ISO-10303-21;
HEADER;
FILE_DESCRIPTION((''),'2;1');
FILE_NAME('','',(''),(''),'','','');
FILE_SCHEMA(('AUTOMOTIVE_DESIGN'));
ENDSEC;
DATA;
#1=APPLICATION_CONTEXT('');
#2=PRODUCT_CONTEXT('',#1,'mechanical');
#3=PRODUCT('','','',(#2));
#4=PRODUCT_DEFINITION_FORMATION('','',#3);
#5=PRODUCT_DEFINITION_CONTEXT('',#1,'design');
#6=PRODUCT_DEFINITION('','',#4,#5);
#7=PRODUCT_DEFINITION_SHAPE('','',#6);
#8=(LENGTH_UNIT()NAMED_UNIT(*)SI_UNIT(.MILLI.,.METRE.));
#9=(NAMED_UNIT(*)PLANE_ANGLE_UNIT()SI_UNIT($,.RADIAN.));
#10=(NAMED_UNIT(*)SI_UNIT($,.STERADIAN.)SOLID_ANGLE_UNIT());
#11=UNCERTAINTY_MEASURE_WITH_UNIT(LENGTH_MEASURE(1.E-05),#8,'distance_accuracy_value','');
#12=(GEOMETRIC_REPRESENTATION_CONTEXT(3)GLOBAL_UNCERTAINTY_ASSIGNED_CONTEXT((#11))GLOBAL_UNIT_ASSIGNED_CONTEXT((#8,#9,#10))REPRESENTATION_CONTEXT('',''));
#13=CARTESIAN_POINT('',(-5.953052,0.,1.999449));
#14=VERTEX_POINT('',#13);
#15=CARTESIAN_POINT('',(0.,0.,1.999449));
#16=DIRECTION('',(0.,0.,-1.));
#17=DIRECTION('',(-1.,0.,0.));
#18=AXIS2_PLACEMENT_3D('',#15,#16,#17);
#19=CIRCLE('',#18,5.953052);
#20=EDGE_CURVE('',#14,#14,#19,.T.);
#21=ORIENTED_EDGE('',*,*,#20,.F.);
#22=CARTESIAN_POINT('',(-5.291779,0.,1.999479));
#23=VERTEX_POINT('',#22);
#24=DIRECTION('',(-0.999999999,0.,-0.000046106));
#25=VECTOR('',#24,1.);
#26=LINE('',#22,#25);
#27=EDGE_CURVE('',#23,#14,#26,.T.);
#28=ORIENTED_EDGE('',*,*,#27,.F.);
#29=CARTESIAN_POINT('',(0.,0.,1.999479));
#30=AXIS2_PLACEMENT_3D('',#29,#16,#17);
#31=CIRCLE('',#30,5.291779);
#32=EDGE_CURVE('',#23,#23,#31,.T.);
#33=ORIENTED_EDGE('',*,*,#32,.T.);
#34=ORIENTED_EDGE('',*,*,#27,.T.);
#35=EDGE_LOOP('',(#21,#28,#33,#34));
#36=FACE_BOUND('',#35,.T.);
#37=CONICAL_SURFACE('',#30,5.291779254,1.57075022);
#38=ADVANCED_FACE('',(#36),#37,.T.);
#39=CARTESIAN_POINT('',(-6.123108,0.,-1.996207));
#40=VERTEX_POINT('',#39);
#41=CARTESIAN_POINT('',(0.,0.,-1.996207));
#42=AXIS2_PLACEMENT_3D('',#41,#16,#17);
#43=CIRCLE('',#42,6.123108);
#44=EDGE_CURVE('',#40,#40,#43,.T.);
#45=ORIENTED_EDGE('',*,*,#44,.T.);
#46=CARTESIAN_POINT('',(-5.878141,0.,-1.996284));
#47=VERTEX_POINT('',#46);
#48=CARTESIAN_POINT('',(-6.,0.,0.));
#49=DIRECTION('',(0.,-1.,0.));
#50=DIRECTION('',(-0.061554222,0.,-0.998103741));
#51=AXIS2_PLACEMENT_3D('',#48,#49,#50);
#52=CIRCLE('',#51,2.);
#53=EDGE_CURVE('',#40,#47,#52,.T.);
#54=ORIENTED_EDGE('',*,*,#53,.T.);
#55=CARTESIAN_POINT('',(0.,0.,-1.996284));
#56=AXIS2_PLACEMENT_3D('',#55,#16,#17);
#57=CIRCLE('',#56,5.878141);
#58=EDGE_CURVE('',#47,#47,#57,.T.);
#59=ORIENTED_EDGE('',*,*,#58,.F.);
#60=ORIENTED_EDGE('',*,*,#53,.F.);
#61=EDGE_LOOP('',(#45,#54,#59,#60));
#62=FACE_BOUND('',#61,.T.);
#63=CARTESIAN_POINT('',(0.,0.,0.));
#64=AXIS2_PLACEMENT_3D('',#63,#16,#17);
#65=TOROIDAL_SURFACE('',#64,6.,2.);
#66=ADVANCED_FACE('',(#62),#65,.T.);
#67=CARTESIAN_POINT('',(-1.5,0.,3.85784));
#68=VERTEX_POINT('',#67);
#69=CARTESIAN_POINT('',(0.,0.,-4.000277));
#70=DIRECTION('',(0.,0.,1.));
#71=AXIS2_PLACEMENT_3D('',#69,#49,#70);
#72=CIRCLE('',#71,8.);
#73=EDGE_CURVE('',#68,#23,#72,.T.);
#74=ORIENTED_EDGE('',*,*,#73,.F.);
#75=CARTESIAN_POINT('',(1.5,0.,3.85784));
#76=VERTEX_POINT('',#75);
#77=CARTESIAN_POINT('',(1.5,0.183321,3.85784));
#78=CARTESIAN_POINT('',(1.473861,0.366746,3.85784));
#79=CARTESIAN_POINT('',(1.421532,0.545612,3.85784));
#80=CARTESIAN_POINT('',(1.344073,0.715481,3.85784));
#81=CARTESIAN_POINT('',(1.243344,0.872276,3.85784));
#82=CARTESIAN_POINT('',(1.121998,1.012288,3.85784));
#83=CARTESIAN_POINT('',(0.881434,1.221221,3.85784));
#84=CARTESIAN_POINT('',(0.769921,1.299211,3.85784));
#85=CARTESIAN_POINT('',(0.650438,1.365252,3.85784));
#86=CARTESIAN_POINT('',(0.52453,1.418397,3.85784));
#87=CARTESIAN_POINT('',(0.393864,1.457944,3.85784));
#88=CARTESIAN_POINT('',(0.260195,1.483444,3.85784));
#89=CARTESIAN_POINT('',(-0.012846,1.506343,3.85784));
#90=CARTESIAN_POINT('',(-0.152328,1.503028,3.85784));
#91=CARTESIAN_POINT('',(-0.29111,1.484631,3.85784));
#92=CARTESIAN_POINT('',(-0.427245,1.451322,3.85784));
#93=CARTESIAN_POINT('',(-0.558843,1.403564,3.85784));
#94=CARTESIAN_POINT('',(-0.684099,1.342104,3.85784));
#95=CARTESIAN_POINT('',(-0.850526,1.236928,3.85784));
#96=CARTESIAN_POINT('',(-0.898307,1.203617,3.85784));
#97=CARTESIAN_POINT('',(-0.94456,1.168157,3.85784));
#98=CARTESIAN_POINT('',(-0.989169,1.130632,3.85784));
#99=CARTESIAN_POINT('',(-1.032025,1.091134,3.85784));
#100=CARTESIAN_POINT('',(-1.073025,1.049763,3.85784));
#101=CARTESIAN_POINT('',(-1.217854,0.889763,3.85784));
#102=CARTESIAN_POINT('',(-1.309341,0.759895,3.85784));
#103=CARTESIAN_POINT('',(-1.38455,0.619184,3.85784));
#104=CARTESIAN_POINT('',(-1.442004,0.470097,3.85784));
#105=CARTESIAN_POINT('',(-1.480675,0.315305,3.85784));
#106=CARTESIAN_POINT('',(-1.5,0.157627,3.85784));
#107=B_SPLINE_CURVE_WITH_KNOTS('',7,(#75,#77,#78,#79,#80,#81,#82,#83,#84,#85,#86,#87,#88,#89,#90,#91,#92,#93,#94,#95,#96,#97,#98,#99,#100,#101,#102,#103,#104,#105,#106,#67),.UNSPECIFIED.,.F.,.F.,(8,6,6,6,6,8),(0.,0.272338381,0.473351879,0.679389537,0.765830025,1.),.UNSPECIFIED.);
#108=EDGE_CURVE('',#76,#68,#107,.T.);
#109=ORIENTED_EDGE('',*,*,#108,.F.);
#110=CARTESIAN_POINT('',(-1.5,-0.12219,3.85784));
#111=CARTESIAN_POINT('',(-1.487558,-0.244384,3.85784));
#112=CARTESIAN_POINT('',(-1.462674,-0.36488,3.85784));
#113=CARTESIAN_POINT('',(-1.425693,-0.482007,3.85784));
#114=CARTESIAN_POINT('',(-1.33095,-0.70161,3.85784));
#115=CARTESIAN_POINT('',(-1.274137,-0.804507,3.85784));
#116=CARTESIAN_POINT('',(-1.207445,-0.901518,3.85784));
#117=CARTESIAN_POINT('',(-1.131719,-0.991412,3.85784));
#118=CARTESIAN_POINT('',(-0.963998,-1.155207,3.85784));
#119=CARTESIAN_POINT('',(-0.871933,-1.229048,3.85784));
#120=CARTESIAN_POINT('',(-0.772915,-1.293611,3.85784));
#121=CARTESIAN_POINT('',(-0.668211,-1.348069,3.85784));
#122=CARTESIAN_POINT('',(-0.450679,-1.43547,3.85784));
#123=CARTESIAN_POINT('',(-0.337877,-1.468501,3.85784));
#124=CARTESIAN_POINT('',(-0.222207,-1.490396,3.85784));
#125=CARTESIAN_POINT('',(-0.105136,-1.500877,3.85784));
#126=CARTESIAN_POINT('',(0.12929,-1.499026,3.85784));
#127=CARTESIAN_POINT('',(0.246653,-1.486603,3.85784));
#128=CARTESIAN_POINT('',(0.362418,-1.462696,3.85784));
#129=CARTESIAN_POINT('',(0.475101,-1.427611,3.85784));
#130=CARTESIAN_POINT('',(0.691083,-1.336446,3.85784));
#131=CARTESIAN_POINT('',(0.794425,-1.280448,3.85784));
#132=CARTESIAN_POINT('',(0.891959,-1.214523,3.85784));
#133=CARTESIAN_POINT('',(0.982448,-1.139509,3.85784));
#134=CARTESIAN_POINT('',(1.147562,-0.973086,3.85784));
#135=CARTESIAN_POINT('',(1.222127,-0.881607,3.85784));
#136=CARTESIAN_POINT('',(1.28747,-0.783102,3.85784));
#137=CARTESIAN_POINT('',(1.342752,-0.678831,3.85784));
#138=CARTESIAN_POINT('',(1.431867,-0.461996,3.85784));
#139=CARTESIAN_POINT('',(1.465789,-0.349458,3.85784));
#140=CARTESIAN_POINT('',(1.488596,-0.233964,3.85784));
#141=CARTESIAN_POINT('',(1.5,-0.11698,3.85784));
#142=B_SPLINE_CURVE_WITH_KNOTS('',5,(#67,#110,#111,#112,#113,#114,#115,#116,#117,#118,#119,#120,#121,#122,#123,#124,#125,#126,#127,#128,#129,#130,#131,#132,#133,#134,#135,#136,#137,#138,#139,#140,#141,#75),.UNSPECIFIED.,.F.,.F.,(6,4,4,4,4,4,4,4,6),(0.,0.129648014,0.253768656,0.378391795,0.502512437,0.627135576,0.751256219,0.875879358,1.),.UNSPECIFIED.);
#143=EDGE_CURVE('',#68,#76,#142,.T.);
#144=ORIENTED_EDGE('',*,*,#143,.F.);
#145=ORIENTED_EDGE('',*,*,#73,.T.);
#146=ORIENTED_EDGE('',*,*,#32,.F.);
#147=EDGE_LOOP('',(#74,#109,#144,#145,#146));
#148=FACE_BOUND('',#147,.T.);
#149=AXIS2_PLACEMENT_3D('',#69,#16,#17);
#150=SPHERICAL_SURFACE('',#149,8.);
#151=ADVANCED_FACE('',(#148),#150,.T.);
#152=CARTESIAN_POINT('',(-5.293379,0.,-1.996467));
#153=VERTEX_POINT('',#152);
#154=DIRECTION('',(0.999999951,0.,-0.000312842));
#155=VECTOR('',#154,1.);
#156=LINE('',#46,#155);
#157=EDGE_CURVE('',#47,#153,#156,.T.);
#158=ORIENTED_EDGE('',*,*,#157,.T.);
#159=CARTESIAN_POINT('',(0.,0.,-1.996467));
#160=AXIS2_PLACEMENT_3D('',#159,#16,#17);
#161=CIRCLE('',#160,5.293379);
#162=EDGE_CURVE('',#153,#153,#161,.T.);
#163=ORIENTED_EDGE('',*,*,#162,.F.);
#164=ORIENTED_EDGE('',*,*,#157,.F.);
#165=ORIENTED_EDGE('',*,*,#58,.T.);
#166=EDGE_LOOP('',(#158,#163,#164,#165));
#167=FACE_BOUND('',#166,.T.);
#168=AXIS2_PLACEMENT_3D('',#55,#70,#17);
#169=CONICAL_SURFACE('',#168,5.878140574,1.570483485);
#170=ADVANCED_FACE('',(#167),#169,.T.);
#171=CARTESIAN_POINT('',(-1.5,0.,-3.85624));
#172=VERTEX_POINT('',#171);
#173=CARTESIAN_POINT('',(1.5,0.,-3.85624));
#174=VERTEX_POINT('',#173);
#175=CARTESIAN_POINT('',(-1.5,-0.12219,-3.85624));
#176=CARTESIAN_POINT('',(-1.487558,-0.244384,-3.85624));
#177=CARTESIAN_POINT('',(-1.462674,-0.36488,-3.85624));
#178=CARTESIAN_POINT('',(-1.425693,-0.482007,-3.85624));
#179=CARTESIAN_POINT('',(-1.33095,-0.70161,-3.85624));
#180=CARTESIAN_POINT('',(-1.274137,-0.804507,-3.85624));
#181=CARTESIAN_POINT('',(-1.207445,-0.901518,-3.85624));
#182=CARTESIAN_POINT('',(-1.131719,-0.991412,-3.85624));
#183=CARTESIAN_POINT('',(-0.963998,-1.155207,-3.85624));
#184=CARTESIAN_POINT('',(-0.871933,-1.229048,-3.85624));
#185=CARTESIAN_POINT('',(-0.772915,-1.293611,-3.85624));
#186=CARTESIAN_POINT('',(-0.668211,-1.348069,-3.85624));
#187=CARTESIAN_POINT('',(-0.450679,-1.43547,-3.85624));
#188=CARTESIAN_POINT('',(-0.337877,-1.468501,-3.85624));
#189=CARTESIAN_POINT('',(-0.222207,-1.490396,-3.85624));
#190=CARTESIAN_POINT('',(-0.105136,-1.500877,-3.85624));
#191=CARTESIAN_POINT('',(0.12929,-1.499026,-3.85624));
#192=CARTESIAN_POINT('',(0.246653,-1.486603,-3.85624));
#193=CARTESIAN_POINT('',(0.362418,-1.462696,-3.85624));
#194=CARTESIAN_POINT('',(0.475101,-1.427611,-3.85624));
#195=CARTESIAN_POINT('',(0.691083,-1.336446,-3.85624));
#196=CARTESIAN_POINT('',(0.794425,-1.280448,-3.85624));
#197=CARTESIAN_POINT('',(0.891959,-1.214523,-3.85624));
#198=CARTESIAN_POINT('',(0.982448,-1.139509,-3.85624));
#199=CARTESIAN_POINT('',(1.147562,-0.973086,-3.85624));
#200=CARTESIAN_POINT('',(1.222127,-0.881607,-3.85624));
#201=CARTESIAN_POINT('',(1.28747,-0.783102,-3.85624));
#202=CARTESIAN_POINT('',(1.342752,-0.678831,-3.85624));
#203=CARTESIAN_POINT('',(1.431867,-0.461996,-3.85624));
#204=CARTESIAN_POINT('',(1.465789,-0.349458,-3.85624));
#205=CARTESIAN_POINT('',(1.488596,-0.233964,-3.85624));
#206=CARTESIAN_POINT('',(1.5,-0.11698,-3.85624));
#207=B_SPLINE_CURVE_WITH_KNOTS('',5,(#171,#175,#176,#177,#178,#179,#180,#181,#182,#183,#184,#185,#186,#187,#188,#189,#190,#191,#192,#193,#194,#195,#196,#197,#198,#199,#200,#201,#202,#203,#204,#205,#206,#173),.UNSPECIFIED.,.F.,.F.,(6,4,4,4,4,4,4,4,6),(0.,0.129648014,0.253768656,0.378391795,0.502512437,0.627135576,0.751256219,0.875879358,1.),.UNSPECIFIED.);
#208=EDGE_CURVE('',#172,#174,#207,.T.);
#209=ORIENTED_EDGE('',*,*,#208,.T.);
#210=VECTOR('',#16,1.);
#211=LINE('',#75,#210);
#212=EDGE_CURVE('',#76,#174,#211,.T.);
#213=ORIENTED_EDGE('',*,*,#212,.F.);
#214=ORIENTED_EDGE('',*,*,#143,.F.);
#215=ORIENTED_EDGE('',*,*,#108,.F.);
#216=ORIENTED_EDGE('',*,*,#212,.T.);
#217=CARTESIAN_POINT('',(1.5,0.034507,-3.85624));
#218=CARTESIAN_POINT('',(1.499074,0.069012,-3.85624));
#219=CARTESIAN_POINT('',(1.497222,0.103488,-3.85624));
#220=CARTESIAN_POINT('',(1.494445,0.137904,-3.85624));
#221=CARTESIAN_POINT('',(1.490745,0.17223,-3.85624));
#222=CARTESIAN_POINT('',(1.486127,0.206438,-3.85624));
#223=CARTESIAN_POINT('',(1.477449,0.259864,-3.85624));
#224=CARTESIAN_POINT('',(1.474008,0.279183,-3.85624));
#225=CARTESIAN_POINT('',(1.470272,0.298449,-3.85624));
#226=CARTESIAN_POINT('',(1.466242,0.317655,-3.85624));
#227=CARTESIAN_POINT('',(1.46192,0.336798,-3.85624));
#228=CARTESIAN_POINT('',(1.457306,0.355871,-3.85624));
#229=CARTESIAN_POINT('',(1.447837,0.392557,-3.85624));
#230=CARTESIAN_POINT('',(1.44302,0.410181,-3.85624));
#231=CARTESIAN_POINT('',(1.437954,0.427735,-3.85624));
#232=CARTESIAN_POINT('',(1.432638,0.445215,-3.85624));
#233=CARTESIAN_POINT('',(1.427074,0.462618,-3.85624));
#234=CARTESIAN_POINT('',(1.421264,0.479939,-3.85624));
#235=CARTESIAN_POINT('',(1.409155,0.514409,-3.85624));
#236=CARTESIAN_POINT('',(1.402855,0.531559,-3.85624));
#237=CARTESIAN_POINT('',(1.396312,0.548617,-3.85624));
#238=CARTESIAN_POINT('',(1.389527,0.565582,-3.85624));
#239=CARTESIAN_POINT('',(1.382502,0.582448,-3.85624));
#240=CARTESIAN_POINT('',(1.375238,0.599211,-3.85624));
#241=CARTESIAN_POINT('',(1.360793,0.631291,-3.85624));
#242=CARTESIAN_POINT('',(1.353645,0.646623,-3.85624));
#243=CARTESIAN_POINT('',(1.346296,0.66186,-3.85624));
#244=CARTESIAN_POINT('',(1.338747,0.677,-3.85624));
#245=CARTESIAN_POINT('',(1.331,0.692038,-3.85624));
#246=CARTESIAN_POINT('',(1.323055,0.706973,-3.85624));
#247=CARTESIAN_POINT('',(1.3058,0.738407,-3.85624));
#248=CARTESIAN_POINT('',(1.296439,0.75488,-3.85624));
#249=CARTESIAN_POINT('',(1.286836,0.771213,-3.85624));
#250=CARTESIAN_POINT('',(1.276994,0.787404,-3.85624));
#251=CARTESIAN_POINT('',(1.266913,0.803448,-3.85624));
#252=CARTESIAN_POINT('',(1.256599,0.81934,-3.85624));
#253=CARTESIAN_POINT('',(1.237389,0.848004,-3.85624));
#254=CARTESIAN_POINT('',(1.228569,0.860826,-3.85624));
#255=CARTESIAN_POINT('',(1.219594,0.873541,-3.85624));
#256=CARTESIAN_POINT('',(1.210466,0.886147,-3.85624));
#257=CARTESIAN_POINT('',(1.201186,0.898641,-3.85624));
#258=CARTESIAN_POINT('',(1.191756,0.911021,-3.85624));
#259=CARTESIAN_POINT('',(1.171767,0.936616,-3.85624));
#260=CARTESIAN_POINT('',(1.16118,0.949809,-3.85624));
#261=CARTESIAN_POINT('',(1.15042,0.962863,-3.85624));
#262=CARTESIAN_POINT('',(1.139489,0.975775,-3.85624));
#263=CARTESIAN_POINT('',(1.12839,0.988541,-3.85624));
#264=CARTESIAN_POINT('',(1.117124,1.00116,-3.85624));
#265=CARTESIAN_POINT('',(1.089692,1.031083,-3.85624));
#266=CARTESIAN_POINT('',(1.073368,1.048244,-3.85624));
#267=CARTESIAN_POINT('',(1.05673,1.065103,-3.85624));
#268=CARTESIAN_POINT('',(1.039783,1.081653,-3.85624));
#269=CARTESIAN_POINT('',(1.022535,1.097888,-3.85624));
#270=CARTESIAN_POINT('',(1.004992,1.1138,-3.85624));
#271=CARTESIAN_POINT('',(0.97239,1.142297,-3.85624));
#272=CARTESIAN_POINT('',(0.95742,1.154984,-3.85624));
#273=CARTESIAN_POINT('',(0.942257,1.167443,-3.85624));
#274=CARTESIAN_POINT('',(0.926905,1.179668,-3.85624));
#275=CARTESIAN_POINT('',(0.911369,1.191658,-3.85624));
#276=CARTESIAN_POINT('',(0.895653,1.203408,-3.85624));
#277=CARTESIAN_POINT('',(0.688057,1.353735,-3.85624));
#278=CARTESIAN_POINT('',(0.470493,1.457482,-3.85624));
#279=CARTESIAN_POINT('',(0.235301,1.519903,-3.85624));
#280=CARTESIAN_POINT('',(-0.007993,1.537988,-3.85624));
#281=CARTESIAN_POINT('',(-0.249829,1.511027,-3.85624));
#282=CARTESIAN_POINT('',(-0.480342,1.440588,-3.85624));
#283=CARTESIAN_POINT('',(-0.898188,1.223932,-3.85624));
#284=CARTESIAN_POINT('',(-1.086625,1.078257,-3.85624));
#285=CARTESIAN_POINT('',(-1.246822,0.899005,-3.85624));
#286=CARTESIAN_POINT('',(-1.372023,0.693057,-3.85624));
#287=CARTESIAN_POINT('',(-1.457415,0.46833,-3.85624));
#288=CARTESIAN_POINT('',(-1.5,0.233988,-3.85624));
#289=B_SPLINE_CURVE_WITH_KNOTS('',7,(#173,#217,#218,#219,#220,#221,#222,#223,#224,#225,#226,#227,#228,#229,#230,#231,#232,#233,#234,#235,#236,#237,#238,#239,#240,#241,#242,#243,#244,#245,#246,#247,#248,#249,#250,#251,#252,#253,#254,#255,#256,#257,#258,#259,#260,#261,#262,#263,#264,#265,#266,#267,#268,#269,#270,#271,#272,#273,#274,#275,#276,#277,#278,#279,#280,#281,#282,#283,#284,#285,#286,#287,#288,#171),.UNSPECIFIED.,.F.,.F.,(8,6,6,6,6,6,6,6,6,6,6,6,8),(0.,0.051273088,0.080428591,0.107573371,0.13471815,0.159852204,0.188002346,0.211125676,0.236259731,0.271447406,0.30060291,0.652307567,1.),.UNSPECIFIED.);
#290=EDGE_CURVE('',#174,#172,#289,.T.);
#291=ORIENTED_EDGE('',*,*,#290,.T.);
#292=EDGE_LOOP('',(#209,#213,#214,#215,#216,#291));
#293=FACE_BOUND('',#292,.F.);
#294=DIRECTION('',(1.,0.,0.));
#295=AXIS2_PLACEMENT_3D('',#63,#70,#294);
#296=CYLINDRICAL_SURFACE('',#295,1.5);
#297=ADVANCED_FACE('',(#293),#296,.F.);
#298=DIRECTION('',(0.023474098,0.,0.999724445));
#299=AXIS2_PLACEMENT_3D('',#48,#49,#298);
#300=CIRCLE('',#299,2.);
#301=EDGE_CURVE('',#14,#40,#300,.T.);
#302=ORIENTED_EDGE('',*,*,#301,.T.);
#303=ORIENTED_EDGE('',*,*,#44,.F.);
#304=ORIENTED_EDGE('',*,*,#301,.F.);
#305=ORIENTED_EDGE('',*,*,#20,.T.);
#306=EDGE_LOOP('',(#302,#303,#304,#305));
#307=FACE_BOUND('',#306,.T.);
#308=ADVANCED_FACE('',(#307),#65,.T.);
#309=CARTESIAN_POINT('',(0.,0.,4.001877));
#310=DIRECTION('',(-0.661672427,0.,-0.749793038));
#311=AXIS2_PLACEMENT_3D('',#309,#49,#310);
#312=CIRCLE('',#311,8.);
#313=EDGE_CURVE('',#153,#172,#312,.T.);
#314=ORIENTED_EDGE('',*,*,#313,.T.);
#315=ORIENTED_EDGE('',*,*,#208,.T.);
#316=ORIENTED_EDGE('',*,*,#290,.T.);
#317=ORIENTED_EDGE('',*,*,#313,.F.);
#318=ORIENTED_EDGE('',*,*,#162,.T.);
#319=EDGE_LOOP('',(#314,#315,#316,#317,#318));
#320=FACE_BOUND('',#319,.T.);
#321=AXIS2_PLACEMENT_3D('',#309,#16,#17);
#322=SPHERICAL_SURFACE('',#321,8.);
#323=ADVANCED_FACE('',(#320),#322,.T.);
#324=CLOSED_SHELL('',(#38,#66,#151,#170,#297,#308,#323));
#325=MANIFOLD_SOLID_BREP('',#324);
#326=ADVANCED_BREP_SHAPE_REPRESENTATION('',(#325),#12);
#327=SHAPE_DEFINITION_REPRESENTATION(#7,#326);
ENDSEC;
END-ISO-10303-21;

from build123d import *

# Parameters (mm, degrees)
F2_R          = 1.5
F3_DEPTH      = 3.999122753
F3_DEPTH_BACK = 4.0007233578


with BuildPart() as f1:
    # F0 (on Front) → F1 (revolve)
    with BuildSketch(Plane.XZ):
        with BuildLine():
            Line((-5.878140574, -1.9962841181), (-5.2933794143, -1.9964670559))
            ThreePointArc((-5.2933794143, -1.9964670559), (-2.8295976372, -3.4809950098), (0, -3.998122753))
            Line((0, -3.998122753), (0, 3.9997233578))
            ThreePointArc((0, 3.9997233578), (-2.8285996381, 3.4829729251), (-5.2917792545, 1.9994793797))
            Line((-5.2917792545, 1.9994793797), (-5.9530518044, 1.9994488908))
            ThreePointArc((-5.9530518044, 1.9994488908), (-7.9981910715, 0.0850437646), (-6.1231084445, -1.9962074819))
            Line((-6.1231084445, -1.9962074819), (-5.878140574, -1.9962841181))
        make_face()
        with BuildLine():
            ThreePointArc((-6.1231084445, -1.9962074819), (-6.0006256837, -1.9999999021), (-5.878140574, -1.9962841181))
            Line((-5.878140574, -1.9962841181), (-6.1231084445, -1.9962074819))
        make_face()
    revolve(axis=Axis((0, 0, 0.0008003024), (0, 0, -1)))

    # F2 (on Top) → F3 (cut, two sides)
    with BuildSketch(Plane.XY) as f3_sk:
        Circle(F2_R)
    extrude(amount=-F3_DEPTH, mode=Mode.SUBTRACT)
    extrude(f3_sk.sketch, amount=F3_DEPTH_BACK, mode=Mode.SUBTRACT)


solid = f1.part
